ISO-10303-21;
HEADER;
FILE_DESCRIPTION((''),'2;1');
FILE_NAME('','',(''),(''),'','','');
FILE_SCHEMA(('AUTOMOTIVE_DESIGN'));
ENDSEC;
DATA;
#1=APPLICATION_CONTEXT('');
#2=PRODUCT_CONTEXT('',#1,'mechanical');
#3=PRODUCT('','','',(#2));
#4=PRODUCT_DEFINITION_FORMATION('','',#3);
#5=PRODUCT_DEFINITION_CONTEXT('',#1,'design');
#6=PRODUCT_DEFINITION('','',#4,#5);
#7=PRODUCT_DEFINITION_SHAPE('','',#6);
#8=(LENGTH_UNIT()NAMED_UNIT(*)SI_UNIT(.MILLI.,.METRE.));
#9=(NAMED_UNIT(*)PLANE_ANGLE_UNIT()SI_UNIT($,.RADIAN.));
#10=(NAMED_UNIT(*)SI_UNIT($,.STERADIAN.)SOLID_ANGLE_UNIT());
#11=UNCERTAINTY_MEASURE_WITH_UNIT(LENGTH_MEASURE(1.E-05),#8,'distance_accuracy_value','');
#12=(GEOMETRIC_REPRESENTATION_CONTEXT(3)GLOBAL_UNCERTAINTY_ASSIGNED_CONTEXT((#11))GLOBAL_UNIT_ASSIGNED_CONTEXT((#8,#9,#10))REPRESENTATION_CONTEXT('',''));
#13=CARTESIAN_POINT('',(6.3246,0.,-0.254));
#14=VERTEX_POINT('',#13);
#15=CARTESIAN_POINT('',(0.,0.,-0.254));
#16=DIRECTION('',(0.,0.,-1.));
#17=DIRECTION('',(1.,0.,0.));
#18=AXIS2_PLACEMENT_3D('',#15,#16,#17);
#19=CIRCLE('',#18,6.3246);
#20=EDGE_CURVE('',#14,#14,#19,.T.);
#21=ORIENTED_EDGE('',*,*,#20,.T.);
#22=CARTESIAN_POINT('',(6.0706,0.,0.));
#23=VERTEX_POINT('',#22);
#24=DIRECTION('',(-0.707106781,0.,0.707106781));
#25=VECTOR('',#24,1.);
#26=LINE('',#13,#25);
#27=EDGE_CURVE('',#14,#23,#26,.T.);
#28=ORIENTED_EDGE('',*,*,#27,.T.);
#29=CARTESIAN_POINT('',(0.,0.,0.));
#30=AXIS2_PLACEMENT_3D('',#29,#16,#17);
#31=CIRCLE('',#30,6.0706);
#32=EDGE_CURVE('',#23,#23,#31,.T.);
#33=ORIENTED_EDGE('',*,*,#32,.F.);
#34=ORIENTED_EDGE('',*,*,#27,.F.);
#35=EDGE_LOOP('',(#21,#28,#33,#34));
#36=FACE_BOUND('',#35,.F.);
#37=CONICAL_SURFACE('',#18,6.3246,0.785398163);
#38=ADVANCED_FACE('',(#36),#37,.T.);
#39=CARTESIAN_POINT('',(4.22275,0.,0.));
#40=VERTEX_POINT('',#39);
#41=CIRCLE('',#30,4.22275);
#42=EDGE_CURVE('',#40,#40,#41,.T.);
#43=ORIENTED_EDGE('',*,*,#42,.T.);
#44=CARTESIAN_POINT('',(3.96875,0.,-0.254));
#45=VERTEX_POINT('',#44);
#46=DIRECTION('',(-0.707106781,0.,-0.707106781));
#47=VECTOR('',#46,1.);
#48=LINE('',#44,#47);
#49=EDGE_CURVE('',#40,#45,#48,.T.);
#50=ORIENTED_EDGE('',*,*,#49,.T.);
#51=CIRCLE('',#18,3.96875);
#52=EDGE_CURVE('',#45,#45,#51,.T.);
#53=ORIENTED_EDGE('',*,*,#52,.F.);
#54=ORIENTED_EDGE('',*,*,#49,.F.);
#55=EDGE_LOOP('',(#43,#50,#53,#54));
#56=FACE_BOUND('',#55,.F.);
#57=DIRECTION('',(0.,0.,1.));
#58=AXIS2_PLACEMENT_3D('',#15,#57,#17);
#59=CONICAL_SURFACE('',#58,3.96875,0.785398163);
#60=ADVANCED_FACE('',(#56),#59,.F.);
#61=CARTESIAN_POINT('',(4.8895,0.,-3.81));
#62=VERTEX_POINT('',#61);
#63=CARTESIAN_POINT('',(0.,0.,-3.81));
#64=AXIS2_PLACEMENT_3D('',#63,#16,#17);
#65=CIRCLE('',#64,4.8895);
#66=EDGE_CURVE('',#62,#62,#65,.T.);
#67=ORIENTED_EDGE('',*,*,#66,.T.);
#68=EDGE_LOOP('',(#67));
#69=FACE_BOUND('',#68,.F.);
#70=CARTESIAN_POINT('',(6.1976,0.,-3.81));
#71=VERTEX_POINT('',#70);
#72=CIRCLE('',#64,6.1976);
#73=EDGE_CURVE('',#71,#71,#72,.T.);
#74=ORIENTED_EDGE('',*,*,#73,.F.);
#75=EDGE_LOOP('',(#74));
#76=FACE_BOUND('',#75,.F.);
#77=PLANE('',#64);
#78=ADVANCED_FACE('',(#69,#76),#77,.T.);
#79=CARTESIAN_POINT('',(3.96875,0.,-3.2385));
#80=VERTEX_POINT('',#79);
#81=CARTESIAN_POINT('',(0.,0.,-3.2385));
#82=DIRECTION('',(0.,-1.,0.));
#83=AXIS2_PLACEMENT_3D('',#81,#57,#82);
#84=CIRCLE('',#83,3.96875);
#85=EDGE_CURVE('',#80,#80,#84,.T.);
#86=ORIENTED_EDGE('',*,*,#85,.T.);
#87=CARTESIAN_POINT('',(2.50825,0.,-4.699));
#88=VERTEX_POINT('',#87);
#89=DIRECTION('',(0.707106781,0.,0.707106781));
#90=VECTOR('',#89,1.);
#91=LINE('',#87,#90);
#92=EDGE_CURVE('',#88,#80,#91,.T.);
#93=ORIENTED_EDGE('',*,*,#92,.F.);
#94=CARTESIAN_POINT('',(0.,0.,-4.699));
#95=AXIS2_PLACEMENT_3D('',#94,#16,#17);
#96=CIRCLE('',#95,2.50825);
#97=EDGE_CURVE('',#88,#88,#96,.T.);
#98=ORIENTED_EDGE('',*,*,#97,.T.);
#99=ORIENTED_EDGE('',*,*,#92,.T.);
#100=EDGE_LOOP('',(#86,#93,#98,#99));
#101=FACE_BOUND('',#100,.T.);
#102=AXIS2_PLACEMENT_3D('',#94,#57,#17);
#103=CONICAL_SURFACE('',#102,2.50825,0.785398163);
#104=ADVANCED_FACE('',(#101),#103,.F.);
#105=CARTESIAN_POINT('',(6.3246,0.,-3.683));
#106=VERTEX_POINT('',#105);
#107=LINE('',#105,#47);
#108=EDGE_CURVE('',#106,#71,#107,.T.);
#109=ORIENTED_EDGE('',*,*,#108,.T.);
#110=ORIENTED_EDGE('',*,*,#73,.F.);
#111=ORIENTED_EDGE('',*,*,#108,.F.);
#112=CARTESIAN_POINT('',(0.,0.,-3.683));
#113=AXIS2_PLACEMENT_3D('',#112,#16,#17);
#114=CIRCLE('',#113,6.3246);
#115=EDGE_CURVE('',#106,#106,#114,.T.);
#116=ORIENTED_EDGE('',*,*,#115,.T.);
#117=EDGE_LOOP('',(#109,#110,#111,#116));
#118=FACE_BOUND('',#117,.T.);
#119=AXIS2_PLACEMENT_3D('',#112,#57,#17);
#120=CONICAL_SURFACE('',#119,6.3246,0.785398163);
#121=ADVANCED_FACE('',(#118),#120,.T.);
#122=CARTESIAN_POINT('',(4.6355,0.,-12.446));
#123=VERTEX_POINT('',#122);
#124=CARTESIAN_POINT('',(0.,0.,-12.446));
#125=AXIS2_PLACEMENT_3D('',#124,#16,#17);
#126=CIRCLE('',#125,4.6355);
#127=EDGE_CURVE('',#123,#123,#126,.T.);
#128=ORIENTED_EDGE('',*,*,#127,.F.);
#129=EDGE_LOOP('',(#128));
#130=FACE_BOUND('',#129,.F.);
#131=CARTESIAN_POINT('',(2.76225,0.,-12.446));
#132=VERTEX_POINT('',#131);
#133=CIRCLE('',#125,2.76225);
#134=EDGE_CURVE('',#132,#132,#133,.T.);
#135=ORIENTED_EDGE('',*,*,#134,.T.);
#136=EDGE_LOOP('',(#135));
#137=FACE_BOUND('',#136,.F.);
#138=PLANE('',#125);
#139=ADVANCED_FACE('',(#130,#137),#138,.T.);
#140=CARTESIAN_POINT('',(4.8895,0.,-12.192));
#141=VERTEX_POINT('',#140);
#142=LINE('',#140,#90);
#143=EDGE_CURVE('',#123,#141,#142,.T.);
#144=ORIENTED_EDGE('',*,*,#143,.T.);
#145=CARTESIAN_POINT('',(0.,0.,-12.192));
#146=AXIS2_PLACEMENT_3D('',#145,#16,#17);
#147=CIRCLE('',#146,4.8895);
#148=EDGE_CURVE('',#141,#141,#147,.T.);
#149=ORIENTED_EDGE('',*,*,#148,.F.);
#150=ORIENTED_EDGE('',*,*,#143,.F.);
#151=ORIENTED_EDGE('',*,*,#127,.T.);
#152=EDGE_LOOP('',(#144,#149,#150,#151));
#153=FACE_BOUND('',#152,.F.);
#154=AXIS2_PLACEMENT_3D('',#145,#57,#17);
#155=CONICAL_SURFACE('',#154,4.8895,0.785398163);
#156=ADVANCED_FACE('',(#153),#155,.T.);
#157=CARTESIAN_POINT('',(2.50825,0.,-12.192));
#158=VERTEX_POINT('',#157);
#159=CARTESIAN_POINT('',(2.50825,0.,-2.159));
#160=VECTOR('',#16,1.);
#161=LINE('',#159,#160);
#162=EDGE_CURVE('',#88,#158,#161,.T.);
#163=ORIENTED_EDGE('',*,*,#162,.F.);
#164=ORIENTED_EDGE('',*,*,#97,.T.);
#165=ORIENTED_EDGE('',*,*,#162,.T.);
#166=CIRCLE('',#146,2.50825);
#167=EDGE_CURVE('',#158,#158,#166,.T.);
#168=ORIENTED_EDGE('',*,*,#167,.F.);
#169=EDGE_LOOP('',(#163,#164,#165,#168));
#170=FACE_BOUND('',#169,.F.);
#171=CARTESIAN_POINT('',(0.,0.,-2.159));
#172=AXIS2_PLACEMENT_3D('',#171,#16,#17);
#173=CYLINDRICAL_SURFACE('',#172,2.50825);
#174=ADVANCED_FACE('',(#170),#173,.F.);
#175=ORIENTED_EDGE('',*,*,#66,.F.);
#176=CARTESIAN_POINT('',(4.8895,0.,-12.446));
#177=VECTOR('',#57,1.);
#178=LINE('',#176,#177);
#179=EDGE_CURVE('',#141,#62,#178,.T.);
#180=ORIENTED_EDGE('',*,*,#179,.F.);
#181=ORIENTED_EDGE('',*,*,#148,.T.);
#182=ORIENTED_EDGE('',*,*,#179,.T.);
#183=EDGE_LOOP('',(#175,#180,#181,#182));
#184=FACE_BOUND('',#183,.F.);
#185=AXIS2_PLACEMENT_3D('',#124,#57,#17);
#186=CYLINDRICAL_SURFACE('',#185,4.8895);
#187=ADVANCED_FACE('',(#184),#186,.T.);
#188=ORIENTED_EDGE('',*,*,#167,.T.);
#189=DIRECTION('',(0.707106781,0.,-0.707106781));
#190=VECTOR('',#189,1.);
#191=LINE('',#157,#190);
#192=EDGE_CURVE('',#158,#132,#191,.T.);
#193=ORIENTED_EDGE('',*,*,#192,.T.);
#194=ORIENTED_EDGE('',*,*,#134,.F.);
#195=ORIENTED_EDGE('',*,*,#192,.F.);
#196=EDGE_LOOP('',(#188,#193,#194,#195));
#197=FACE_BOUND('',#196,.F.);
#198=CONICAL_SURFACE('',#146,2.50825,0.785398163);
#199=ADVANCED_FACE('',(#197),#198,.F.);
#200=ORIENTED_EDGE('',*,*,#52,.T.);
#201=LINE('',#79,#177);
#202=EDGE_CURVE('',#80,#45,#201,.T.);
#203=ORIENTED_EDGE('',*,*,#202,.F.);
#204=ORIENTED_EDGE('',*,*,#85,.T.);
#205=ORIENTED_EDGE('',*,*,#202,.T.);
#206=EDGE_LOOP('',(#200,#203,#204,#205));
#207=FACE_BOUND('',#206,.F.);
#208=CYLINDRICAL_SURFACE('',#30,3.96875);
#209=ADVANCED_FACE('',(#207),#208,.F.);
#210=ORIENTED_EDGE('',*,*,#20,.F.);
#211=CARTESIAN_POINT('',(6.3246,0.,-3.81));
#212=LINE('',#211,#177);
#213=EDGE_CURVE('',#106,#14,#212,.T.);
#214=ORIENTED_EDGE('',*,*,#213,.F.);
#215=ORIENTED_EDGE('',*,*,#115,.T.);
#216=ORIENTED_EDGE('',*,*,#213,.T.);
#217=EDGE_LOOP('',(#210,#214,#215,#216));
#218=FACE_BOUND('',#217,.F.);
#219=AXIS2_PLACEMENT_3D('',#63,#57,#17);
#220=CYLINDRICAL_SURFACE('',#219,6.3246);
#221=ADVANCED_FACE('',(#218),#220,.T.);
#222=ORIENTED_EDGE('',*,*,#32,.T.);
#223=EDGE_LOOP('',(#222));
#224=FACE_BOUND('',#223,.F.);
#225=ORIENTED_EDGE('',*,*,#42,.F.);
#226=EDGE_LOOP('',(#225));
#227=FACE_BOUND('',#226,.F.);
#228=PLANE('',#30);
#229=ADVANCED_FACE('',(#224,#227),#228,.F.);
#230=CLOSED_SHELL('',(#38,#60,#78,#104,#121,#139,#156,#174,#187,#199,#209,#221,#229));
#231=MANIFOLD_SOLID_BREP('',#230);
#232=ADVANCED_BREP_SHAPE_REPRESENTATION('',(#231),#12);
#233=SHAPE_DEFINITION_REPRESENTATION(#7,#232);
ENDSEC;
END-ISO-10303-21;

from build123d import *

# Parameters (mm, degrees)
F2_SIZE     = 0.254
F3_S5_R     = 3.96875
F3_T6_DEPTH = 9
F4_SIZE     = 0.127


# Not quite as in the source:
# - a fillet or chamfer that OpenCascade refuses, or shapes differently, is made with other operations: its cross-section is extruded or revolved along the edge and cut away or added


with BuildPart() as f1:
    # F0 (on Front) → F1 (revolve)
    with BuildSketch(Plane.XZ):
        Polygon((6.3246, -3.81), (6.3246, 0), (3.96875, 0), (3.96875, -2.159), (2.50825, -2.159), (2.50825, -12.446), (4.8895, -12.446), (4.8895, -3.81), align=None)
    revolve(axis=Axis((0, 0, -10.7170343399), (0, 0, -1)))

    # F2
    f2_edges = [f1.edges().sort_by_distance(p)[0] for p in [
        (-6.3246, 0, 0),
        (-4.8895, 0, -12.446),
        (-2.50825, 0, -12.446),
        (-3.96875, 0, 0),
    ]]
    chamfer(f2_edges, length=F2_SIZE)

    # F3: chamfer of 2.54 on 1 edges, made by hand


with BuildPart() as f3_tool2:
    # F3_s3 → F3_t4 (revolve)
    with BuildSketch(Plane.XZ):
        Polygon((2.50825, -4.699), (5.04825, -2.159), (2.50825, -2.159), align=None)
    revolve(axis=Axis((0, 0, -2.159), (0, 0, -1)))

    # F3_s5 → F3_t6 (intersect, symmetric)
    with BuildSketch(Plane.XY.offset(-3.4)):
        Circle(F3_S5_R)
    extrude(amount=F3_T6_DEPTH, both=True, mode=Mode.INTERSECT)


with BuildPart() as f1_1:
    add(f1.part)

    # F3_t1: cut F3_tool2
    add(f3_tool2.part, mode=Mode.SUBTRACT)

    # F4
    f4_edges = [f1_1.edges().sort_by_distance(p)[0] for p in [
        (-6.3246, 0, -3.81),
    ]]
    chamfer(f4_edges, length=F4_SIZE)


solid = f1_1.part
